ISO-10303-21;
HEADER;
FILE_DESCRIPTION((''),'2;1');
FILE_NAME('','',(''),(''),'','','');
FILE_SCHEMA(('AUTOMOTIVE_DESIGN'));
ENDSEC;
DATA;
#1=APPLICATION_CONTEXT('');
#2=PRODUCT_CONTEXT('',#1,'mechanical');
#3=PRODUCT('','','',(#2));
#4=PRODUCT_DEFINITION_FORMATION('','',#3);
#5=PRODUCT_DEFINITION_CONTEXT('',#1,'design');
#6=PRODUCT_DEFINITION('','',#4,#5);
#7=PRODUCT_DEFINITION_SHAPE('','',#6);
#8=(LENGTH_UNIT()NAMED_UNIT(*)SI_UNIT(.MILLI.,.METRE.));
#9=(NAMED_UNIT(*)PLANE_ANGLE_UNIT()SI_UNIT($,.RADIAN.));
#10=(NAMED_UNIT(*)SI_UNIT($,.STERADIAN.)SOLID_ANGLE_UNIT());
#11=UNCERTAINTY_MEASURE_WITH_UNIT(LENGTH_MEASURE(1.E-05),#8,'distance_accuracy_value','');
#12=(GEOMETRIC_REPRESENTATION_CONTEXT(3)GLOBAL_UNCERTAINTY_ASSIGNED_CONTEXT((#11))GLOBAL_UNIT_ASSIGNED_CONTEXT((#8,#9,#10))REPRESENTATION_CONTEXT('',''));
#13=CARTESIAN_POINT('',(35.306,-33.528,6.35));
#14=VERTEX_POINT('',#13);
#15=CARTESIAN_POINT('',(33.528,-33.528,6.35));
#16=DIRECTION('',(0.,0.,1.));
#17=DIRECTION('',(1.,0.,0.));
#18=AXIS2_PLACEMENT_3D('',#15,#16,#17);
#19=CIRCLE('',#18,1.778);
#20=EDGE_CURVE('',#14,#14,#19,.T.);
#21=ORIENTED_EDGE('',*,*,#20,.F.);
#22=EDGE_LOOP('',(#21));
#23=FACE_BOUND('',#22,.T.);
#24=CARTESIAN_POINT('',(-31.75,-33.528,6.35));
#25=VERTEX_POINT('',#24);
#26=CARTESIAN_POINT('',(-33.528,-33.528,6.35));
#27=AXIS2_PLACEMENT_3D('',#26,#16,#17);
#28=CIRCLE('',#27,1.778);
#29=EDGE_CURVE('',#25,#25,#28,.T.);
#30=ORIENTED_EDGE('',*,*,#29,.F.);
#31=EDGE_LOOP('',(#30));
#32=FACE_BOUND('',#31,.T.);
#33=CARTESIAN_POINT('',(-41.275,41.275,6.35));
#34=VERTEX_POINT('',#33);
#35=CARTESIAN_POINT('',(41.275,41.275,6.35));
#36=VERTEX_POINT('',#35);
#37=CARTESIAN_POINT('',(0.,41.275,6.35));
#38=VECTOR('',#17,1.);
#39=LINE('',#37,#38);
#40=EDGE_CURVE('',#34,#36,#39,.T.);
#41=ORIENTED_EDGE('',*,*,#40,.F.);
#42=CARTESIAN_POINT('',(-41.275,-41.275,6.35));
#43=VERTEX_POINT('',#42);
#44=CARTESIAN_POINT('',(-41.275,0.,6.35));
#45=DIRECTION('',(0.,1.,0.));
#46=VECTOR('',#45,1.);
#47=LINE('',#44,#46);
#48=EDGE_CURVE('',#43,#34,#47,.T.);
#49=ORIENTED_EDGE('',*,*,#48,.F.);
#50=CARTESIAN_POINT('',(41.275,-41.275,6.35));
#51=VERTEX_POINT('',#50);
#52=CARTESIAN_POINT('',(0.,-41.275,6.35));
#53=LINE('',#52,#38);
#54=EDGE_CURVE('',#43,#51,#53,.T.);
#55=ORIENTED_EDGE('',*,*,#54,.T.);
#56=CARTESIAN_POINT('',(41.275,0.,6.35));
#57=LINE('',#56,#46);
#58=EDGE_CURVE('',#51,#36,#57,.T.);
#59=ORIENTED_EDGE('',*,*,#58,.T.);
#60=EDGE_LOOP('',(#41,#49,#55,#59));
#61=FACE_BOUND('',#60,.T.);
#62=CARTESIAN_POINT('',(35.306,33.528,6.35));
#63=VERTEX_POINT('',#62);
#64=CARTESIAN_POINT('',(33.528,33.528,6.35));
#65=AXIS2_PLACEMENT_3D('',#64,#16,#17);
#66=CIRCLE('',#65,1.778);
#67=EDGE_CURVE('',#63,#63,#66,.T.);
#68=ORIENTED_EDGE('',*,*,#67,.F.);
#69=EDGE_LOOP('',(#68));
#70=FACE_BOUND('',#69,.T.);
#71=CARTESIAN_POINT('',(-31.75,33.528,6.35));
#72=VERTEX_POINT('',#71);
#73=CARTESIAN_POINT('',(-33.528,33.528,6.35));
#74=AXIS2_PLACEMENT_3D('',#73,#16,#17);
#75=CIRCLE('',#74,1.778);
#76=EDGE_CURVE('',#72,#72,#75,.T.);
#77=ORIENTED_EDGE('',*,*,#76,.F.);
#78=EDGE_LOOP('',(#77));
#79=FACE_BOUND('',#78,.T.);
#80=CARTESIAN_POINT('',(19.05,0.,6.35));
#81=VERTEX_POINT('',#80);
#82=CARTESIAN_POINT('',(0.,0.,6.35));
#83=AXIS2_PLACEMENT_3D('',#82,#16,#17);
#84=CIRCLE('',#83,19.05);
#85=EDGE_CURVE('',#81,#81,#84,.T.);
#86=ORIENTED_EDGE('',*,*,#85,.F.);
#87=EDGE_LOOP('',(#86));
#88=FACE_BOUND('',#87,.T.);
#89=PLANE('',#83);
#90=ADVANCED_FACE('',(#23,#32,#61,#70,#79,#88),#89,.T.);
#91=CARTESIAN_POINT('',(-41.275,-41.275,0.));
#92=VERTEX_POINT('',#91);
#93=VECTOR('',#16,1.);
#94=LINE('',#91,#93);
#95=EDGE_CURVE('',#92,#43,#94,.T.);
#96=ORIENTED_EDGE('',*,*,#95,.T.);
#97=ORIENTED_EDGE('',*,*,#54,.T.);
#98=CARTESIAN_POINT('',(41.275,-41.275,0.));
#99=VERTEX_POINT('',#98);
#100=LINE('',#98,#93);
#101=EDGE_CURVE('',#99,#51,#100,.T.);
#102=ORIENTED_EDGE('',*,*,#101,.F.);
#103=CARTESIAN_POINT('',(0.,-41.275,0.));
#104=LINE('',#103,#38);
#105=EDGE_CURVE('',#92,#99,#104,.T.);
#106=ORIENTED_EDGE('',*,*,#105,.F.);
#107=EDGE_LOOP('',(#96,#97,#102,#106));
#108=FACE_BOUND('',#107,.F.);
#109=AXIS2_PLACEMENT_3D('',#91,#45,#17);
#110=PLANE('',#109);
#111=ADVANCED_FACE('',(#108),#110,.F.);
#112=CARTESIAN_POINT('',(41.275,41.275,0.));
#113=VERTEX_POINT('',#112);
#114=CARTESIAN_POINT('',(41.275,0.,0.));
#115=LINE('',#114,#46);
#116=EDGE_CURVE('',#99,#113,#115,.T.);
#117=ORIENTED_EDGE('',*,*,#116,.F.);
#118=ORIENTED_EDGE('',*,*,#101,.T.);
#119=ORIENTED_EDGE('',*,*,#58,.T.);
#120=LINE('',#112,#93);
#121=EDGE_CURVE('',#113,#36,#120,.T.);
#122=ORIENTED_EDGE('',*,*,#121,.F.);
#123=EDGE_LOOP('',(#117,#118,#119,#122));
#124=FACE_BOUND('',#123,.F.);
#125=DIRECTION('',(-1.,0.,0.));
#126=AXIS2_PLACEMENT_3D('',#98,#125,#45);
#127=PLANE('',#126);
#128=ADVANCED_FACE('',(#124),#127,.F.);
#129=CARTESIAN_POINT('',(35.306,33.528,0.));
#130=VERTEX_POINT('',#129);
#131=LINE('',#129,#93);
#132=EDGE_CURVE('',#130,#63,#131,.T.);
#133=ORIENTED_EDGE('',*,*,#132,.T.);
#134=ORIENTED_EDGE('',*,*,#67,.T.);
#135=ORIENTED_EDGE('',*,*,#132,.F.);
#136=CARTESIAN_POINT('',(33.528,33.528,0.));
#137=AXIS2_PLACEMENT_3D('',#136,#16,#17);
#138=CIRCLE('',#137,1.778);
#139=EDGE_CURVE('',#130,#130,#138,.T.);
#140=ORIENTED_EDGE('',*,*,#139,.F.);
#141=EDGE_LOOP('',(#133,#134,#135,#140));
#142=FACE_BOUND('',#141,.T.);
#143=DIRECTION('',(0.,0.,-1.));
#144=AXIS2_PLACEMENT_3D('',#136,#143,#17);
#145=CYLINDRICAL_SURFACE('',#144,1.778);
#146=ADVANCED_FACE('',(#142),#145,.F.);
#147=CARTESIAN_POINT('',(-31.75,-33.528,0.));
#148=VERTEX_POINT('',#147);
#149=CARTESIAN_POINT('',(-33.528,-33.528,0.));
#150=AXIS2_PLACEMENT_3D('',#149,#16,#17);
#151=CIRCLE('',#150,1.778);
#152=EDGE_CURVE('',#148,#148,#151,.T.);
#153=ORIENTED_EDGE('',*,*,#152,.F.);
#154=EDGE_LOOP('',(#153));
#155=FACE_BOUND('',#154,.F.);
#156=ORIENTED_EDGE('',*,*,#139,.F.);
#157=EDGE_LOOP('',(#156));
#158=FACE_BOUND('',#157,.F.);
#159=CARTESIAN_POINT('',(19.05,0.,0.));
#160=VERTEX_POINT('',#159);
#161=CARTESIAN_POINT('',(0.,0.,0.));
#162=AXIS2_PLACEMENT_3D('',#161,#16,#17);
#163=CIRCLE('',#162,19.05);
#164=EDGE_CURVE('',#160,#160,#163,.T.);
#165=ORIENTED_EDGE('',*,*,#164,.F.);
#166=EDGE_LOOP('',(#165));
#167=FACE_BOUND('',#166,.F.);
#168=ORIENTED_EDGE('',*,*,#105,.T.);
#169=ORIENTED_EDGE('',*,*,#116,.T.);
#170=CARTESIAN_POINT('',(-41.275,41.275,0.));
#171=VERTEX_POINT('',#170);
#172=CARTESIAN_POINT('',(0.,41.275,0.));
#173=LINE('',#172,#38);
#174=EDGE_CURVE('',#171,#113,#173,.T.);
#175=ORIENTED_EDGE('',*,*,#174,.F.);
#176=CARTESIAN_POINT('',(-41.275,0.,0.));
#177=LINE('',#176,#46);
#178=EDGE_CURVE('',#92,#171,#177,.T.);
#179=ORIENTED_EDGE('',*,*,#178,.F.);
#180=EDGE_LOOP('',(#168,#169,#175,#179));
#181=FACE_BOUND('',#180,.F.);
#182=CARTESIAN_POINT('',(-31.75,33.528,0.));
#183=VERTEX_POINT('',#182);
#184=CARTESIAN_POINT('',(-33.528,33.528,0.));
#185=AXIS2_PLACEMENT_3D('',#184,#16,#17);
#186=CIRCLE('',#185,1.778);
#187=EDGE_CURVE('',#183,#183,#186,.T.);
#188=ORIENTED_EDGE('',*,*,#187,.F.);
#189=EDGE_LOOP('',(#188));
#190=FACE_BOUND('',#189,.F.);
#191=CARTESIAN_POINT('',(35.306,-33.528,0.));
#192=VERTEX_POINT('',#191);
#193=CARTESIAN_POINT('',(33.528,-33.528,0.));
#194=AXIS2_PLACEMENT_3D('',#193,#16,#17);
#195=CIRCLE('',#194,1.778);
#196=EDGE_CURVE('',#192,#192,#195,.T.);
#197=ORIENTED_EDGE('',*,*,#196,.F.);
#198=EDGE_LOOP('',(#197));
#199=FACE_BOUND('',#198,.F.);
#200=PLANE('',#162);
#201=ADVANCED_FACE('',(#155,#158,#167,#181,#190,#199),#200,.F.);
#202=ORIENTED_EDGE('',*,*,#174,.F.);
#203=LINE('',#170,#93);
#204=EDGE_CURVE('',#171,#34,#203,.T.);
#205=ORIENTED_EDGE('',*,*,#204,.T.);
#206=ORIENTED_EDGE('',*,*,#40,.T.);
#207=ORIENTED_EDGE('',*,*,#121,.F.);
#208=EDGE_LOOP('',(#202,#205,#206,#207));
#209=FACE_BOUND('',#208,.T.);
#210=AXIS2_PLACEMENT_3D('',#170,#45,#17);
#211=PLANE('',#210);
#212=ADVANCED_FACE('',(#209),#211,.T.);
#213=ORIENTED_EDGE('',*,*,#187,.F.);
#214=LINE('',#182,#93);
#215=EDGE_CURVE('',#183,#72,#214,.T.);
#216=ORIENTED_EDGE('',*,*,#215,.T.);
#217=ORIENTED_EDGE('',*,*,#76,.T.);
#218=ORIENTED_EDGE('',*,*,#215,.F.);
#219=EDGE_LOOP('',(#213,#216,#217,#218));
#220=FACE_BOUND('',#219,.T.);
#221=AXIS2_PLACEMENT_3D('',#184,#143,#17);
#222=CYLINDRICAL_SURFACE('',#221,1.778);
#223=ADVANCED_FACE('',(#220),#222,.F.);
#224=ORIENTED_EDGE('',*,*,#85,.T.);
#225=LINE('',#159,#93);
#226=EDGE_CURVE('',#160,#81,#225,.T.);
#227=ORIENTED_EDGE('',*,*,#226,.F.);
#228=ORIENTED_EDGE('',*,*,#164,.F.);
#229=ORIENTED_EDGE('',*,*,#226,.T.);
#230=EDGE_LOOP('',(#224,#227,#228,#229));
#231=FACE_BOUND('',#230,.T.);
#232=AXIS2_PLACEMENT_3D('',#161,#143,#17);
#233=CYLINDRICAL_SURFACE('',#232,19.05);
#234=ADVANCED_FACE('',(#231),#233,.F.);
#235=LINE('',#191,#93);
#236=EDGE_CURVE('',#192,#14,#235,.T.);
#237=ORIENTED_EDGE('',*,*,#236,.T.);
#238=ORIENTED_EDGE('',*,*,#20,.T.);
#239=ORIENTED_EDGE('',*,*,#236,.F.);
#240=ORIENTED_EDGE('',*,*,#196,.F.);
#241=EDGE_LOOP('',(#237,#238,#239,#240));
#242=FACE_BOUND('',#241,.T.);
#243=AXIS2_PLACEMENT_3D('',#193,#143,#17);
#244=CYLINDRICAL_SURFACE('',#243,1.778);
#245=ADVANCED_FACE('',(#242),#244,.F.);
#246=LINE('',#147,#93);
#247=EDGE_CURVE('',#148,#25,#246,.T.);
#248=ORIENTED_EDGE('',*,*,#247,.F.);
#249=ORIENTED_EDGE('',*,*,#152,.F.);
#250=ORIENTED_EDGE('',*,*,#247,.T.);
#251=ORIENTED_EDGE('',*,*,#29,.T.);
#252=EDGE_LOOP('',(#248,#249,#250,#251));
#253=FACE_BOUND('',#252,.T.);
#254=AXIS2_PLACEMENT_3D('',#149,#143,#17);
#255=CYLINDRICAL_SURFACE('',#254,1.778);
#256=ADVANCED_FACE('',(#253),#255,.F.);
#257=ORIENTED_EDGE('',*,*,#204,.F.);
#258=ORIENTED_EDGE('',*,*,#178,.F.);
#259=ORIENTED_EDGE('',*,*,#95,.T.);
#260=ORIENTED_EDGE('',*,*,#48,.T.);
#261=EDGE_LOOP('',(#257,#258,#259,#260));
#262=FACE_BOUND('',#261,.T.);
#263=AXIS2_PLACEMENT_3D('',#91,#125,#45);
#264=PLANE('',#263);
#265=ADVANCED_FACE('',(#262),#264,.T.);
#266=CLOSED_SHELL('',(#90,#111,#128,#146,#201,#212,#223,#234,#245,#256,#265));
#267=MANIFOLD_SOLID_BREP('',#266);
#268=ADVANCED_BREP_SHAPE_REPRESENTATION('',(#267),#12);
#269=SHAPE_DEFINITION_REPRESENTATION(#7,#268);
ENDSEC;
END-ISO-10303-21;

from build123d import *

# Parameters (mm, degrees)
F0_W     = 82.55
F0_H     = 82.55
F0_R     = 1.778
F0_R_2   = 19.05
F1_DEPTH = 6.35


# Not quite as in the source:
# - a length typed as a fraction of an inch, garbled in the dataset ("3 / 203.2 mm" for 3/8 in), is restored


with BuildPart() as f1:
    # F0 (on Top) → F1 (new body)
    with BuildSketch(Plane.XY):
        Rectangle(F0_W, F0_H)
        with Locations((-33.528, -33.528)):
            Circle(F0_R, mode=Mode.SUBTRACT)
        with Locations((33.528, -33.528)):
            Circle(F0_R, mode=Mode.SUBTRACT)
        with Locations((-33.528, 33.528)):
            Circle(F0_R, mode=Mode.SUBTRACT)
        Circle(F0_R_2, mode=Mode.SUBTRACT)
        with Locations((33.528, 33.528)):
            Circle(F0_R, mode=Mode.SUBTRACT)
    extrude(amount=F1_DEPTH)


solid = f1.part
